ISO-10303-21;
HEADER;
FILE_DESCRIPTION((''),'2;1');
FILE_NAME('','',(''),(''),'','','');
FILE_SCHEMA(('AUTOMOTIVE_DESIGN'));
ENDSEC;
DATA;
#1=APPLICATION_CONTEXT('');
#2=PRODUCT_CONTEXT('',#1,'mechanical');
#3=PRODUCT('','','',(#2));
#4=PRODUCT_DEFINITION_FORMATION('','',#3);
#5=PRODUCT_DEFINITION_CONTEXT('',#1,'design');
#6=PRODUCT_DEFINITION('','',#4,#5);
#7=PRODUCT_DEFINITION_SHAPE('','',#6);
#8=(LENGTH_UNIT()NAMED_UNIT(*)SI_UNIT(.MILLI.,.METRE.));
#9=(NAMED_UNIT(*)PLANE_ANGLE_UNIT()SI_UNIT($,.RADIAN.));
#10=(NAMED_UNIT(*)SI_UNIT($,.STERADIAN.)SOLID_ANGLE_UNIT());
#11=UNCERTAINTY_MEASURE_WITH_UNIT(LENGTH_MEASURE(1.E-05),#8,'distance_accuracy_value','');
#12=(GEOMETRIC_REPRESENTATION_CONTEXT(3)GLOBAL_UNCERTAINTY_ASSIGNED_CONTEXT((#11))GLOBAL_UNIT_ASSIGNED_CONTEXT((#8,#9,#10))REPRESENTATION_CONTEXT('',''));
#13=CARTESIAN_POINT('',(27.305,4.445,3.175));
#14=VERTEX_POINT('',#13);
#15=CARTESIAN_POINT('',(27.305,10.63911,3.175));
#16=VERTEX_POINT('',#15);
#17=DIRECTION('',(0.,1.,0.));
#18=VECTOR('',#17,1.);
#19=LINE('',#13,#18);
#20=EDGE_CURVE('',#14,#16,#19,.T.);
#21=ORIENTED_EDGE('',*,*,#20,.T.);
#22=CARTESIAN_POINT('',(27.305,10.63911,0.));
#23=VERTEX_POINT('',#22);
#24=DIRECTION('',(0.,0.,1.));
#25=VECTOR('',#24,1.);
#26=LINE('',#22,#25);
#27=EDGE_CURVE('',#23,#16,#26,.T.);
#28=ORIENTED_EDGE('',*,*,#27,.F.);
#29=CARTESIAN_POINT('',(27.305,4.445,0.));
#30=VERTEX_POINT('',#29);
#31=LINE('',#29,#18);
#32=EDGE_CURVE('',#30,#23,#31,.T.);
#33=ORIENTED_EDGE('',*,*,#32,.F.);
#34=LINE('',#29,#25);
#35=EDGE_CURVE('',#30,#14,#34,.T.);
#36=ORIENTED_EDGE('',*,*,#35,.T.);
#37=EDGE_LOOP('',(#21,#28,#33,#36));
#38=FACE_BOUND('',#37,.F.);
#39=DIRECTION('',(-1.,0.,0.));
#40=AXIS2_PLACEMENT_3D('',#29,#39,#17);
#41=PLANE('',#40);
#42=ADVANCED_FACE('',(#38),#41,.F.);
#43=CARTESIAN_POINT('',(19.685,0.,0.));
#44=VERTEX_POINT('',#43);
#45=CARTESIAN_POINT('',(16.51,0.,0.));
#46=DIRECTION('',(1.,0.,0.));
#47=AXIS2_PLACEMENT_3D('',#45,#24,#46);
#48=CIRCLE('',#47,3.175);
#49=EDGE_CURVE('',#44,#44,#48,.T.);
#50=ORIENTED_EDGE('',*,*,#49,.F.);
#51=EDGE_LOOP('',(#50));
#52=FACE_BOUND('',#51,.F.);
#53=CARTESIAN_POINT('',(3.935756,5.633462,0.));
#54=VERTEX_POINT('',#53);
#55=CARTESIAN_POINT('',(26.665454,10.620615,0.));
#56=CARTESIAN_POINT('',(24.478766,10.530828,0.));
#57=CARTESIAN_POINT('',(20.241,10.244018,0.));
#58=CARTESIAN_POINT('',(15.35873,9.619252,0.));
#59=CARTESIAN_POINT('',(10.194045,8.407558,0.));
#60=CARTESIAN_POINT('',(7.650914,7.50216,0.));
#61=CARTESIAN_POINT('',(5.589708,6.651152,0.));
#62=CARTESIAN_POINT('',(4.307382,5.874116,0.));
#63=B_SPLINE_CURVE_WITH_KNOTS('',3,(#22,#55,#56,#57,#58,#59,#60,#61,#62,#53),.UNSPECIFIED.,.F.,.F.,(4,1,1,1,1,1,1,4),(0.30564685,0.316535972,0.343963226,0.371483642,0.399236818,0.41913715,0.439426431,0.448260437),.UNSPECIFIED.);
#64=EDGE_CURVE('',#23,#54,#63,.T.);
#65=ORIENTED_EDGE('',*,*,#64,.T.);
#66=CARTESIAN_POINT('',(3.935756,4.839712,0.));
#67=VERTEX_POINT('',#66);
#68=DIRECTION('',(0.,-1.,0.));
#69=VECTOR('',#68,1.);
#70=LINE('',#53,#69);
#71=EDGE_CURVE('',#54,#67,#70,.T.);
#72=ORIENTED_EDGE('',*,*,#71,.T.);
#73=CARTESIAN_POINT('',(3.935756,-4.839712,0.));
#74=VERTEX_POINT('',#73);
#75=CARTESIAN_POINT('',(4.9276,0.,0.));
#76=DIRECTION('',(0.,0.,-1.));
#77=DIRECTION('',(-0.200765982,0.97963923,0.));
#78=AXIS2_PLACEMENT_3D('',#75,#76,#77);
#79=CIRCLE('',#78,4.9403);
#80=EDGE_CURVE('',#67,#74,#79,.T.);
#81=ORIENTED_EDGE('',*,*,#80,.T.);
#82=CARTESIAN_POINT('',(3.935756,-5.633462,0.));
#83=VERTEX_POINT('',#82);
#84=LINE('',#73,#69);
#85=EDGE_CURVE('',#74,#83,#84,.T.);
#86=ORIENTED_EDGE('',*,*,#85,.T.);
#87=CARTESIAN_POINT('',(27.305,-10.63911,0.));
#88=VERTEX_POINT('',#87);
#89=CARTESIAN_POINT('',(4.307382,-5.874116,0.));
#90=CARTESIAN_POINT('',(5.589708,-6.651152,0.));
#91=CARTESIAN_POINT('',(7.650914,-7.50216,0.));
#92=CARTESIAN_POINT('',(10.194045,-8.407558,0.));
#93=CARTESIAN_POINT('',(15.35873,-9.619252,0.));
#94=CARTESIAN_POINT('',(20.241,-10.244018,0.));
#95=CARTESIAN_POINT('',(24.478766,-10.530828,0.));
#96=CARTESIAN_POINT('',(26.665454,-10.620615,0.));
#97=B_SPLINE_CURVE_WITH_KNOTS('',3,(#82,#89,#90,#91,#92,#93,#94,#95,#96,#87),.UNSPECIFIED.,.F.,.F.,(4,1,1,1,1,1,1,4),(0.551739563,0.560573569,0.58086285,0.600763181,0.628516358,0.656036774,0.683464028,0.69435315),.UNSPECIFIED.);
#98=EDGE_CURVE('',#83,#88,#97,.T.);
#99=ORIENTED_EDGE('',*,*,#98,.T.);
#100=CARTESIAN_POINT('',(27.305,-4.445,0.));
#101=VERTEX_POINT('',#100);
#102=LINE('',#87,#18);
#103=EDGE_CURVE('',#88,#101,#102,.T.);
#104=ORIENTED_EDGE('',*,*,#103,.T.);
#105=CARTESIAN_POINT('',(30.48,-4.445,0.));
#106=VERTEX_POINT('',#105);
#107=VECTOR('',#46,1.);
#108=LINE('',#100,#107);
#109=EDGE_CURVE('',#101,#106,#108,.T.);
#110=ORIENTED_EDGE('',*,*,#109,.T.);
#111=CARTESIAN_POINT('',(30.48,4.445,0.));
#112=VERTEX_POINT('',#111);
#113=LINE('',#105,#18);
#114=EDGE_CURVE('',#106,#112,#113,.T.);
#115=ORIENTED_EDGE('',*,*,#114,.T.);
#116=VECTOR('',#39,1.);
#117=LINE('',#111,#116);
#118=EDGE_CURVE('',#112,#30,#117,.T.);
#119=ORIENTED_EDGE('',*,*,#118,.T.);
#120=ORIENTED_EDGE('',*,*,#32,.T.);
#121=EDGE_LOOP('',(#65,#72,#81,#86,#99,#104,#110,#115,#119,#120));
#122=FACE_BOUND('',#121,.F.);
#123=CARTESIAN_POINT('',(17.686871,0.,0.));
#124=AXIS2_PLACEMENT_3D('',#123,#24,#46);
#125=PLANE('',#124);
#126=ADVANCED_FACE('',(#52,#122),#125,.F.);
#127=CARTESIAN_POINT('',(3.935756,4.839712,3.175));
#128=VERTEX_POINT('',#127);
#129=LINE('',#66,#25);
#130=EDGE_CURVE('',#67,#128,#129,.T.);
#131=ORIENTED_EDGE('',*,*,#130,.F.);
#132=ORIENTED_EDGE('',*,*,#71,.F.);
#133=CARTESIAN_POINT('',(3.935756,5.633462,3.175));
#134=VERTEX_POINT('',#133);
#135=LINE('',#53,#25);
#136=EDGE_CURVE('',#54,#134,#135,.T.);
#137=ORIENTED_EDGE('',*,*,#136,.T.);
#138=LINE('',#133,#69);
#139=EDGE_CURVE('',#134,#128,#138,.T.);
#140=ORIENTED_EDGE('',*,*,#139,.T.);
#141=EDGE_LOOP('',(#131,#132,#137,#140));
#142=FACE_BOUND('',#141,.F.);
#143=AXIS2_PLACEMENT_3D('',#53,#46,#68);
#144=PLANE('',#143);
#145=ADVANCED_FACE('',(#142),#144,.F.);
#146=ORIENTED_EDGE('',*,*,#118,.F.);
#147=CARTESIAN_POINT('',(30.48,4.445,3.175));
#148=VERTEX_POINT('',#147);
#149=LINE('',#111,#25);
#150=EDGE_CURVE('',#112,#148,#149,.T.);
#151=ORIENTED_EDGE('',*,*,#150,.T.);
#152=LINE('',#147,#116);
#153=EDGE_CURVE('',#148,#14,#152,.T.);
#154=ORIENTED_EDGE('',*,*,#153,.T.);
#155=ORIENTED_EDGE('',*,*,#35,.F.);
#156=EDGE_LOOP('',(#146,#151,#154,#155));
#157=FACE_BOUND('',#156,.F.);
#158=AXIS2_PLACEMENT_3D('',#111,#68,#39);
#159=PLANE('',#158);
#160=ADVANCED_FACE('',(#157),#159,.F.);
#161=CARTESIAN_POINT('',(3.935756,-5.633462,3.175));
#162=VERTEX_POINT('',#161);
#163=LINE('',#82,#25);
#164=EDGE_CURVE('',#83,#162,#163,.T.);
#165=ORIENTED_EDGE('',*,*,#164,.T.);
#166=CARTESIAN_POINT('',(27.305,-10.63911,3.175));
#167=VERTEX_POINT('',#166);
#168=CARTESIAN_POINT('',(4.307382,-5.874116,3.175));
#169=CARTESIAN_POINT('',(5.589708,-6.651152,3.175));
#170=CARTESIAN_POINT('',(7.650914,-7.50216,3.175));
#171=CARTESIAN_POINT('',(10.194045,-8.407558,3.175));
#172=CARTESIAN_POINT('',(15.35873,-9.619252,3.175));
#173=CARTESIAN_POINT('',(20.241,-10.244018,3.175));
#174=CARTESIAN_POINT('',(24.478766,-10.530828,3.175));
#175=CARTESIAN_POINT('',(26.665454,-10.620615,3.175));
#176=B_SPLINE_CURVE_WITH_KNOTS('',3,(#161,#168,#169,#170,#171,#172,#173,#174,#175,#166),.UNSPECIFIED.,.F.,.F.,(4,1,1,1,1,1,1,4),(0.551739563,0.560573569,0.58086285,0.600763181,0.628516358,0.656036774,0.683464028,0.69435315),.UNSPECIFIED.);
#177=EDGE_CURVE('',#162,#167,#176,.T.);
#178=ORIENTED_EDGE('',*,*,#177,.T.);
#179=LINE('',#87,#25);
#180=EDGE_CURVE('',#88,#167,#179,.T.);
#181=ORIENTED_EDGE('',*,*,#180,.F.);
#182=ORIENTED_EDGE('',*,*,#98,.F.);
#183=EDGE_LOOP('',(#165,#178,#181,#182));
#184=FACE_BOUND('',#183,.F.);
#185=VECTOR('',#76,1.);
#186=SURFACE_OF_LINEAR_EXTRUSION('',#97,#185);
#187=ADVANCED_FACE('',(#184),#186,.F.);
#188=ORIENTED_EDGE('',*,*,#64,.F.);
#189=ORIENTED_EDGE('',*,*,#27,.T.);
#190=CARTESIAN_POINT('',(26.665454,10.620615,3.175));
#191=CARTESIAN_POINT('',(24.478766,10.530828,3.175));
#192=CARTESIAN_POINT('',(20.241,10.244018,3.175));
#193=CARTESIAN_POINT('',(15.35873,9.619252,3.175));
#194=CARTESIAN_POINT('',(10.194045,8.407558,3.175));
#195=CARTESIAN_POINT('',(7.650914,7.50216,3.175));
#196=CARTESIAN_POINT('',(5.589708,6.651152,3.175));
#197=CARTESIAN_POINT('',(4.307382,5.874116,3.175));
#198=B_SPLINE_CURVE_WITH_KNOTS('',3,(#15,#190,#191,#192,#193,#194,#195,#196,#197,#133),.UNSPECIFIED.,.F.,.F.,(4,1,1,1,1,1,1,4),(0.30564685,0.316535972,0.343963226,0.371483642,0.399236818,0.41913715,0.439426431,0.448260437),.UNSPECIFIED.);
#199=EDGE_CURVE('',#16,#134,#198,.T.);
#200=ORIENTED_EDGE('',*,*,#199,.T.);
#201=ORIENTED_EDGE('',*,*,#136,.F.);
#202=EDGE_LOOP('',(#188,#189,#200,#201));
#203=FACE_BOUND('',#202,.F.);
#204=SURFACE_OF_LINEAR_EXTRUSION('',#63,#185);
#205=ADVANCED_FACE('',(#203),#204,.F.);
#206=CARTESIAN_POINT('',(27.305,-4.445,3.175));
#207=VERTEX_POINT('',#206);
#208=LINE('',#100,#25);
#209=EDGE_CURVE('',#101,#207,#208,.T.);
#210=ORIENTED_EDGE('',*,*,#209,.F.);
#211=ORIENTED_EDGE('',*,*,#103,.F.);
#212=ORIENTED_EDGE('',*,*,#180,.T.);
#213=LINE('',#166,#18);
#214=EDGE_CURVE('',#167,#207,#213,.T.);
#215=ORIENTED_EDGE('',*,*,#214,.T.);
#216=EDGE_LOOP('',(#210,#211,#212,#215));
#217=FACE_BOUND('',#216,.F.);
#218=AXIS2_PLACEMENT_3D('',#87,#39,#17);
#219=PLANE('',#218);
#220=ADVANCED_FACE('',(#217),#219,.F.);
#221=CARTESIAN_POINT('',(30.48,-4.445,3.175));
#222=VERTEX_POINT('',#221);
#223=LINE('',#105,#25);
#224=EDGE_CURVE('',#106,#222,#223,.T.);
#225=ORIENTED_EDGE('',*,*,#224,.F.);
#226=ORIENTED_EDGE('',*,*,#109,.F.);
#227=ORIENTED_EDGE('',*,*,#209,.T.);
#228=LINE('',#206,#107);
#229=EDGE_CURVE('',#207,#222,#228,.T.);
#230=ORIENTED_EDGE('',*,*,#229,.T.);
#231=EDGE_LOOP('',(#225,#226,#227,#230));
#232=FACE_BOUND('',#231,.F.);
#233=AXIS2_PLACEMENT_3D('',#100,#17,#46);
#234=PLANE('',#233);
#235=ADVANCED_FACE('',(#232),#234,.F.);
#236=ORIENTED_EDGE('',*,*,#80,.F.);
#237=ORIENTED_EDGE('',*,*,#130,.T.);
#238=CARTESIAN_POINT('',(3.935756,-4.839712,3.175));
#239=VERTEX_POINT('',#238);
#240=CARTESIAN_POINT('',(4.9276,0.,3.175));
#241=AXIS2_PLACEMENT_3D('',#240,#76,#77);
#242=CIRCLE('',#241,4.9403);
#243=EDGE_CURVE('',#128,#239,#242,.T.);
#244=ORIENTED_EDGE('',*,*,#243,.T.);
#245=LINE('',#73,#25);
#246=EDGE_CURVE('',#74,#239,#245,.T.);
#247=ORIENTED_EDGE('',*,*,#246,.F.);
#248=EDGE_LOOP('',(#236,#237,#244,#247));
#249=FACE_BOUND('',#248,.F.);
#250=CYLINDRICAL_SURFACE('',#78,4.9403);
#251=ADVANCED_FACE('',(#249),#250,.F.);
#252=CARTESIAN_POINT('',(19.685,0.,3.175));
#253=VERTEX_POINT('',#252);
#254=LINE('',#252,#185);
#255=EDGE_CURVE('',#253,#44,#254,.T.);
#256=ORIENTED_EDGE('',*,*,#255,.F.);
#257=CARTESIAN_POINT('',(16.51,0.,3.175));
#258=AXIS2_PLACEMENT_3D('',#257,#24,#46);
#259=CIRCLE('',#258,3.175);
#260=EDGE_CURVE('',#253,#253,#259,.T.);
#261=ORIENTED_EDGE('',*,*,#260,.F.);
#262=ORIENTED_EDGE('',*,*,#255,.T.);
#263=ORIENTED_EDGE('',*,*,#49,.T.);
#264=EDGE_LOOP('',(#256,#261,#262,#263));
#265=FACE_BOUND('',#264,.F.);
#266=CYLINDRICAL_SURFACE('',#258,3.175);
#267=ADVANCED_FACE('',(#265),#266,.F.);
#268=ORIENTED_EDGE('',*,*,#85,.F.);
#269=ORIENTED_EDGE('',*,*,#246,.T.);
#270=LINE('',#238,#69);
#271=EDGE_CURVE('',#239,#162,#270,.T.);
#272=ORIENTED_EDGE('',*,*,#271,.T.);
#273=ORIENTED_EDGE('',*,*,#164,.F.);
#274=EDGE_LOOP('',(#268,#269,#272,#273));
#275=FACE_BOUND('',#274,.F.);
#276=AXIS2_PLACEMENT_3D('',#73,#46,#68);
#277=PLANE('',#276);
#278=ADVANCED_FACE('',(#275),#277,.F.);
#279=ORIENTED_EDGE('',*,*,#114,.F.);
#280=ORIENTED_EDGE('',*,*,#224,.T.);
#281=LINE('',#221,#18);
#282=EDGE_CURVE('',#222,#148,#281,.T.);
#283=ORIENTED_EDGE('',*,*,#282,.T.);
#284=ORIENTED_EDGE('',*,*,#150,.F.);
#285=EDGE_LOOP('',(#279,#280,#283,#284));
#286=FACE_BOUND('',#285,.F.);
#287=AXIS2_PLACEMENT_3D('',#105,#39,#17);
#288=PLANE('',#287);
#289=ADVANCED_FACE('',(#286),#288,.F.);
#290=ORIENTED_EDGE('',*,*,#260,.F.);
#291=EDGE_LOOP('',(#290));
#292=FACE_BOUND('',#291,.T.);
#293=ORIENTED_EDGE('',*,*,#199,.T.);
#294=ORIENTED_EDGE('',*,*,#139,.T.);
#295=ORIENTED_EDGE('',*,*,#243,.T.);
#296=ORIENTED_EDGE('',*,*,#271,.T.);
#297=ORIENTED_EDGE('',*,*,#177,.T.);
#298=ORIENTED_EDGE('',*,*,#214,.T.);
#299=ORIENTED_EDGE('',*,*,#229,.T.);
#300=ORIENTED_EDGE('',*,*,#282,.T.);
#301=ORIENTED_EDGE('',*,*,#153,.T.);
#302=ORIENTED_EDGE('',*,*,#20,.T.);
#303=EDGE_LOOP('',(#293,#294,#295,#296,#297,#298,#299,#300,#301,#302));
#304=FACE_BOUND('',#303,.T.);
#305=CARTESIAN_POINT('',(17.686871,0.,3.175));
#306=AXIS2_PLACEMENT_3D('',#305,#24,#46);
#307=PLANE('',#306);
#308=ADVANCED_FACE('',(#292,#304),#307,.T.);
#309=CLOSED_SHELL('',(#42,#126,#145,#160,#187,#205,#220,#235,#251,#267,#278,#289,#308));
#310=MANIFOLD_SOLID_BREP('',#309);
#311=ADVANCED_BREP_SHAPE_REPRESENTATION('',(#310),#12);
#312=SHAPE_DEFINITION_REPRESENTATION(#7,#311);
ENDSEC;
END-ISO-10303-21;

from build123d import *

# Parameters (mm, degrees)
F1_DEPTH      = 3.175
F2_R          = 3.175
F3_DEPTH      = 3.175
F4_W          = 1.27
F4_H          = 6.2519614453
F5_DEPTH      = 25.4
F5_DEPTH_BACK = 25.4


with BuildPart() as f1:
    # F0 (on Top) → F1 (new body)
    with BuildSketch(Plane.XY):
        with BuildLine():
            Line((27.305, 4.445), (27.305, 10.639110318))
            add(Edge.make_bspline(
                [(27.305, 10.639110318), (26.6654543063, 10.6206147569), (24.478766488, 10.5308275824), (20.2410001582, 10.2440182138), (15.3587302448, 9.6192519425), (10.1940451056, 8.4075577542), (7.6509138704, 7.5021601175), (5.5897078561, 6.6511520763), (4.3073818225, 5.8741162544), (3.9357558202, 5.633461687)],
                knots=[0.3056468503, 0.3056468503, 0.3056468503, 0.3056468503, 0.3165359722, 0.343963226, 0.3714836424, 0.3992368185, 0.4191371497, 0.4394264313, 0.4482604373, 0.4482604373, 0.4482604373, 0.4482604373], degree=3))
            Line((3.9357558202, 5.633461687), (3.9357558202, 4.839711687))
            ThreePointArc((3.9357558202, 4.839711687), (9.8679, 0), (3.9357558202, -4.839711687))
            Line((3.9357558202, -4.839711687), (3.9357558202, -5.633461687))
            add(Edge.make_bspline(
                [(3.9357558202, -5.633461687), (4.3073818225, -5.8741162544), (5.5897078561, -6.6511520763), (7.6509138704, -7.5021601175), (10.1940451056, -8.4075577542), (15.3587302448, -9.6192519425), (20.2410001582, -10.2440182138), (24.478766488, -10.5308275824), (26.6654543063, -10.6206147569), (27.305, -10.639110318)],
                knots=[0.5517395627, 0.5517395627, 0.5517395627, 0.5517395627, 0.5605735687, 0.5808628503, 0.6007631815, 0.6285163576, 0.656036774, 0.6834640278, 0.6943531497, 0.6943531497, 0.6943531497, 0.6943531497], degree=3))
            Line((27.305, -10.639110318), (27.305, -4.445))
            Line((27.305, -4.445), (30.48, -4.445))
            Line((30.48, -4.445), (30.48, 4.445))
            Line((30.48, 4.445), (27.305, 4.445))
        make_face()
    extrude(amount=F1_DEPTH)

    # F2 (on face) → F3 (cut, through all)
    with BuildSketch(Plane.XY.offset(3.175)):
        with Locations((16.51, 0)):
            Circle(F2_R)
    extrude(amount=-F3_DEPTH, mode=Mode.SUBTRACT)


with BuildPart() as f1b:
    # F0 (on Top) → F1, piece 2 (new body)
    with BuildSketch(Plane.XY):
        with BuildLine():
            add(Edge.make_bspline(
                [(1.1020531618, 3.1259807227), (0.5678867915, 2.3248543379), (-0.5678867915, 0), (0.5678867915, -2.3248543379), (1.1020531618, -3.1259807227)],
                knots=[0.4791511417, 0.4791511417, 0.4791511417, 0.4791511417, 0.5, 0.5208488583, 0.5208488583, 0.5208488583, 0.5208488583], degree=3))
            ThreePointArc((1.1020531618, 3.1259807227), (-0.0127, 0), (1.1020531618, -3.1259807227))
        make_face()
    extrude(amount=F1_DEPTH)

    # F4 (on Top) → F5 (cut, two sides)
    with BuildSketch(Plane.XY) as f5_sk:
        with Locations((0.4670531618, 0)):
            Rectangle(F4_W, F4_H)
    extrude(amount=F5_DEPTH, mode=Mode.SUBTRACT)
    extrude(f5_sk.sketch, amount=-F5_DEPTH_BACK, mode=Mode.SUBTRACT)


solid = f1.part
